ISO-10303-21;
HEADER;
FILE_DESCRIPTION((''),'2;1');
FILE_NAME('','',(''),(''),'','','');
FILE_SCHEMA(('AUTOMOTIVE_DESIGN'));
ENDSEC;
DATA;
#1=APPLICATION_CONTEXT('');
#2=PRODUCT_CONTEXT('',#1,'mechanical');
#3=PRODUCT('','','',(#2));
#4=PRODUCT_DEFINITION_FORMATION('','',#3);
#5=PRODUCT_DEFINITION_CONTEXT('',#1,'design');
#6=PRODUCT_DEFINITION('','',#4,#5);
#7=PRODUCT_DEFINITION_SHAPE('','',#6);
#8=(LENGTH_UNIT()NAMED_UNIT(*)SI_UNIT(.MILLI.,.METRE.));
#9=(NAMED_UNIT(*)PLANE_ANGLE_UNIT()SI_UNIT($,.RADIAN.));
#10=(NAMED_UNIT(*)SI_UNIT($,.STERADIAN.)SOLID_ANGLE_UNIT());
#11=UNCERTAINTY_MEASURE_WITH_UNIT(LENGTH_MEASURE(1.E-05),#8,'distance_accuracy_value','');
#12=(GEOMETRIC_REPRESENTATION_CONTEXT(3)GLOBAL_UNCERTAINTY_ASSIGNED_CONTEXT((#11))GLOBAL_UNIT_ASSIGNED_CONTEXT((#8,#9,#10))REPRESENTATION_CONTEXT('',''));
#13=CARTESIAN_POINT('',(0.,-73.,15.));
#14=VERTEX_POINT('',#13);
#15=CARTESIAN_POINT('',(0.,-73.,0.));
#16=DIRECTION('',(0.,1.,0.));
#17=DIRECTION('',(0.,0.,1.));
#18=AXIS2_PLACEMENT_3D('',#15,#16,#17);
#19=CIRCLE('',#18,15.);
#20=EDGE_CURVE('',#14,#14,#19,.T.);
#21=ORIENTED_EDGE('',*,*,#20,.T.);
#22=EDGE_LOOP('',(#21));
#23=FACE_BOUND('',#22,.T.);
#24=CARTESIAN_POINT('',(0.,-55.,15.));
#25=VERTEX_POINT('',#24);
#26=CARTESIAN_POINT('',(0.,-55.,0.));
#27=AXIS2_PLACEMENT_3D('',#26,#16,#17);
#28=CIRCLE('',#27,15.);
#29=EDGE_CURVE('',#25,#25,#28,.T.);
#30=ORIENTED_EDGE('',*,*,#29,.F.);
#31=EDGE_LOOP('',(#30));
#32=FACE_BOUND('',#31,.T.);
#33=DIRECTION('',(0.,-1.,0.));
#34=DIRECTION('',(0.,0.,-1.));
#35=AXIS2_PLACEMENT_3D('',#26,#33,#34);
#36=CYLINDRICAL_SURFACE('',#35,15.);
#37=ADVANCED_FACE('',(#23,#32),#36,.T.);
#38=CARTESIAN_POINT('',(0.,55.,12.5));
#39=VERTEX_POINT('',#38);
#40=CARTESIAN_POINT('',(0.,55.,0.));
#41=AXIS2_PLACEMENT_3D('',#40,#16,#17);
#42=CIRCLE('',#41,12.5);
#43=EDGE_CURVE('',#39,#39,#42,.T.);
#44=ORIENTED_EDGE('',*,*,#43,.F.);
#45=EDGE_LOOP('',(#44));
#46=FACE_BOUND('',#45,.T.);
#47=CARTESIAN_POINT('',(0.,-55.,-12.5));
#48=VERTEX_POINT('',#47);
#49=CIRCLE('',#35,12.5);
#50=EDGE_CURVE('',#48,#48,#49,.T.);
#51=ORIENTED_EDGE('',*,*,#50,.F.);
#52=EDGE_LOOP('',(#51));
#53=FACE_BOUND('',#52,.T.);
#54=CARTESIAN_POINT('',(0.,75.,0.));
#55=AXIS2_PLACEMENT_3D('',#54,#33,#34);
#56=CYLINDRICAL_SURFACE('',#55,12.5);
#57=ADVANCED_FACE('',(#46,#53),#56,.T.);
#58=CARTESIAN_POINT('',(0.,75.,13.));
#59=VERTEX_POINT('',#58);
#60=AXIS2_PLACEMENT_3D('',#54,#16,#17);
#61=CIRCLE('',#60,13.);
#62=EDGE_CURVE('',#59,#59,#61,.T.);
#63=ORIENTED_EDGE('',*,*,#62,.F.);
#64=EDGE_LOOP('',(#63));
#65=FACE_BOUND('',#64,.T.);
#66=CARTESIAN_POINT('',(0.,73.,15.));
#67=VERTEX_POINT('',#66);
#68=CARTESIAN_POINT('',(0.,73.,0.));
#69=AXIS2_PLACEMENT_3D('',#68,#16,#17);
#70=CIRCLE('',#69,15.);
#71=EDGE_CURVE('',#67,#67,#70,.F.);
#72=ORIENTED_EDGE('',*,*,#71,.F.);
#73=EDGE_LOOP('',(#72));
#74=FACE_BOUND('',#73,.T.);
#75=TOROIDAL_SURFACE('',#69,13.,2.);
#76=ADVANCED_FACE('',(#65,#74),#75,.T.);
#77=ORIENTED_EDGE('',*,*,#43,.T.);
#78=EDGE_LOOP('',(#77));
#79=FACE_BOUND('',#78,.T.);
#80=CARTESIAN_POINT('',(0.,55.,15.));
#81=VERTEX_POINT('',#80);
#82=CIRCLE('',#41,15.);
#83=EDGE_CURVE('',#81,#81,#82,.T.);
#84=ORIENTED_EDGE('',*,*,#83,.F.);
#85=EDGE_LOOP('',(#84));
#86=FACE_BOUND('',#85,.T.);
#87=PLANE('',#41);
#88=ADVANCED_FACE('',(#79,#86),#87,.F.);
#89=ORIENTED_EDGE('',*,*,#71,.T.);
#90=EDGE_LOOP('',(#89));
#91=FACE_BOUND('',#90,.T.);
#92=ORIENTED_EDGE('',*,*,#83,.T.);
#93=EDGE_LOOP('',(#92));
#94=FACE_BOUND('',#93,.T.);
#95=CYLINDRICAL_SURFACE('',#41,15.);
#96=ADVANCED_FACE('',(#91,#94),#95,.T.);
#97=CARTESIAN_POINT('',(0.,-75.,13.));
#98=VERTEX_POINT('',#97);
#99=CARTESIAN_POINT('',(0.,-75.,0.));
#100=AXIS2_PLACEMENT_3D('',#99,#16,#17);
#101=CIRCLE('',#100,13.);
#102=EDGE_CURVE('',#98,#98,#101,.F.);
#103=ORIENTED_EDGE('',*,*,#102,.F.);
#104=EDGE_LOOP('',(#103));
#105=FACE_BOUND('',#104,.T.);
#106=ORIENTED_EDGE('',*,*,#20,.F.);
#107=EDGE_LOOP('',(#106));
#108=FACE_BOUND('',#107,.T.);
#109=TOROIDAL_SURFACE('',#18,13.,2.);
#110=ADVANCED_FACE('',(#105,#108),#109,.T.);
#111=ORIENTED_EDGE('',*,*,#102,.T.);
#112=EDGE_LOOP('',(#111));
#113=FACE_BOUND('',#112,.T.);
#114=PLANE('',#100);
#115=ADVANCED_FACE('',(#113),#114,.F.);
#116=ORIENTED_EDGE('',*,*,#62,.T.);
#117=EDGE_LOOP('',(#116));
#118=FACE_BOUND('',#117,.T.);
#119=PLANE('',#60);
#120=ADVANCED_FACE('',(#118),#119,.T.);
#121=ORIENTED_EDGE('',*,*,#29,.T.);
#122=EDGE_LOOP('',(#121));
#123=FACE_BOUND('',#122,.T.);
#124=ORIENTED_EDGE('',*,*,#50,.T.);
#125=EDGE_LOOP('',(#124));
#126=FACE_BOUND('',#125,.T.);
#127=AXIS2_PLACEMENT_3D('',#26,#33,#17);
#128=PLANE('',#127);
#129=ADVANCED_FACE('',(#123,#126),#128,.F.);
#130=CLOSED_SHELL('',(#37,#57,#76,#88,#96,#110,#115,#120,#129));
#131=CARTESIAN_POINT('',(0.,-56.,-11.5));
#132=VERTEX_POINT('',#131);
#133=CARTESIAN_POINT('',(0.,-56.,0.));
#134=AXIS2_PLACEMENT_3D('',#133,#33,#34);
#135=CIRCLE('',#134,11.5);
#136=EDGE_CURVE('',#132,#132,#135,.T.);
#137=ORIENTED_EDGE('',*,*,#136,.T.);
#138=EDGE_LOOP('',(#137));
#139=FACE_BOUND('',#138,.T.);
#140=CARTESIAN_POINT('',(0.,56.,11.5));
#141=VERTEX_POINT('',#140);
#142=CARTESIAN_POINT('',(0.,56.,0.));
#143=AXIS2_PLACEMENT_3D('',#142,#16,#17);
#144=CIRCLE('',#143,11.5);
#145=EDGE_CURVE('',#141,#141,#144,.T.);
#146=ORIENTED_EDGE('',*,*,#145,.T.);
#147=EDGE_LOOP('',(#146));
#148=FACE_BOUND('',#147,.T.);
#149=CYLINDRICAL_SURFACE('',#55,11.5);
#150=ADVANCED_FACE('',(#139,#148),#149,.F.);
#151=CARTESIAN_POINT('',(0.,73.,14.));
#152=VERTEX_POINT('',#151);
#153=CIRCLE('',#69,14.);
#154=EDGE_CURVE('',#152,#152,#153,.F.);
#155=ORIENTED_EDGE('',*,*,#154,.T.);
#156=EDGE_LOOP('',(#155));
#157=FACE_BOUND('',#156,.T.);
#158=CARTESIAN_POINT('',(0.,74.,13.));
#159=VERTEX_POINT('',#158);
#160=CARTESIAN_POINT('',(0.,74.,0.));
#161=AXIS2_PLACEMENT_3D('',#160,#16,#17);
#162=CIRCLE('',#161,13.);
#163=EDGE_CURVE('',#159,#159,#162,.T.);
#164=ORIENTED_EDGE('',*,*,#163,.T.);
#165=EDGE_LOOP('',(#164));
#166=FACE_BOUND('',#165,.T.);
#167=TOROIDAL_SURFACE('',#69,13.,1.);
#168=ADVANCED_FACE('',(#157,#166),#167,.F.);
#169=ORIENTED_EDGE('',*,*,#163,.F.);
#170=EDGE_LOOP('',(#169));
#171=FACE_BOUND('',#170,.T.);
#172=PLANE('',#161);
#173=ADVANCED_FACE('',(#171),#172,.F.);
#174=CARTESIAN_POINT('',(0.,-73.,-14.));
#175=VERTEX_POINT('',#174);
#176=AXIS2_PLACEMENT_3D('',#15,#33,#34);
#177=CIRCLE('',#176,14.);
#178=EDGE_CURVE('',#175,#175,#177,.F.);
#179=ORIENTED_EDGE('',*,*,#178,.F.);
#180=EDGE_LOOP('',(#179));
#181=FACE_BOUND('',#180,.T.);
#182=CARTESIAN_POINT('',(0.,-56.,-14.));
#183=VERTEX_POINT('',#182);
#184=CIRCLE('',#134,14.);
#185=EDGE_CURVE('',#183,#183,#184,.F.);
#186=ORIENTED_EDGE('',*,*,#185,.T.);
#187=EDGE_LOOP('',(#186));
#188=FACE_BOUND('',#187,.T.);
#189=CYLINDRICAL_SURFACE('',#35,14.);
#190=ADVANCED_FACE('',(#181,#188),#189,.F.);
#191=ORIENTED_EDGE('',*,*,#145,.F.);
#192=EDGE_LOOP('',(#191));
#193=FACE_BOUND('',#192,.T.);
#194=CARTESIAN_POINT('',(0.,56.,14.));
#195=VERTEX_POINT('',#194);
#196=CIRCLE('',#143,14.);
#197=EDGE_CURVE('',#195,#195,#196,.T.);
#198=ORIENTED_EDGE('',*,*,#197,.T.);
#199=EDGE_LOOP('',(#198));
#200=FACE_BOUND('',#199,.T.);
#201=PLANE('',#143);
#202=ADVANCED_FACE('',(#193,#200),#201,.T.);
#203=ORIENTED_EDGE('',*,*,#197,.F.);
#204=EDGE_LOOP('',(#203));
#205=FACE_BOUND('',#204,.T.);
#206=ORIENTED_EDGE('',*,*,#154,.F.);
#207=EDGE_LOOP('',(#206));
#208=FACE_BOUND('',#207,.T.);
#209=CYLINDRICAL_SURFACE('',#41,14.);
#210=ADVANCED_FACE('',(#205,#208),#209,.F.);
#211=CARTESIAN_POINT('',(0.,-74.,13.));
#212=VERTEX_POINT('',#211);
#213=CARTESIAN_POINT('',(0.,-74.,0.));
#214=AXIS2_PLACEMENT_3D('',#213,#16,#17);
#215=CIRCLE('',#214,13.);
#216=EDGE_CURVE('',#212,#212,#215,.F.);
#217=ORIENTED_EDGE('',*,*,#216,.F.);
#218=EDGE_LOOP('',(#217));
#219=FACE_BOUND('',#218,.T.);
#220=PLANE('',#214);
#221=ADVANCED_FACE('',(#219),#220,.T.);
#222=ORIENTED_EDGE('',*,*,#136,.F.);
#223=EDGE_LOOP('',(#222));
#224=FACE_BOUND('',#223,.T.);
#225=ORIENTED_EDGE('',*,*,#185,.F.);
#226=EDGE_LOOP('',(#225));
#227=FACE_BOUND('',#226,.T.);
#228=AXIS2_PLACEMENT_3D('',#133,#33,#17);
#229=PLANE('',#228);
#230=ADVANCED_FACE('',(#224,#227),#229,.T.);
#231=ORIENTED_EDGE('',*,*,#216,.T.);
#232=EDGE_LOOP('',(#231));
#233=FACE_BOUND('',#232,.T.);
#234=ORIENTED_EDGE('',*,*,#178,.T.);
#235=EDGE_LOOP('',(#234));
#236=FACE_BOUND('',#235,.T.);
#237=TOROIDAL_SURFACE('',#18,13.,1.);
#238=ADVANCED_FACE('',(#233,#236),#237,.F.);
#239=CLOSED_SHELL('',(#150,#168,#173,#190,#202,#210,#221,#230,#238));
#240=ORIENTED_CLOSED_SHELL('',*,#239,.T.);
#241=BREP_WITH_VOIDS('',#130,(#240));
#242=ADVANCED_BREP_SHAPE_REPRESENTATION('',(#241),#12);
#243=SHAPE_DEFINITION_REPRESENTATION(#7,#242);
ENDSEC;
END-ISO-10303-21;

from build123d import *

# Parameters (mm, degrees)
SKETCH1_R           = 12.5
BOSS_EXTRUDE1_DEPTH = 75
SKETCH2_R           = 15
BOSS_EXTRUDE2_DEPTH = 20
FILLET1_R           = 2


# Read off the part's stored shape, not the designer's step: Shell2
with BuildPart() as part:
    # Sketch1 → Boss-Extrude1 (new, symmetric)
    with BuildSketch(Plane(origin=(0, 0, 0), x_dir=(1, 0, 0), z_dir=(0, 1, 0))):
        with Locations(Location((0, 0, 0), (0, 0, 270))):
            Circle(SKETCH1_R)
    extrude(amount=BOSS_EXTRUDE1_DEPTH, both=True)

    # Sketch2 → Boss-Extrude2 (add)
    with BuildSketch(Plane(origin=(0, 75, 0), x_dir=(1, 0, 0), z_dir=(0, 1, 0))):
        with Locations(Location((0, 0, 0), (0, 0, 270))):
            Circle(SKETCH2_R)
    boss_extrude2 = extrude(amount=-BOSS_EXTRUDE2_DEPTH)

    # Mirror1: Boss-Extrude2 across plane
    add(boss_extrude2.mirror(Plane.ZX))

    # Fillet1
    fillet1_edges = [part.edges().sort_by_distance(p)[0] for p in [
        (0, -75, -15),
        (0, 75, -15),
    ]]
    fillet(fillet1_edges, radius=FILLET1_R)

    # Shell2 outline → Shell2 (revolve, cut)
    with BuildSketch(Plane.XY):
        with BuildLine():
            Line((13, 74), (0, 74))
            Line((0, 74), (0, -74))
            Line((0, -74), (13, -74))
            ThreePointArc((13, -74), (13.707106781, -73.707106781), (14, -73))
            Line((14, -73), (14, -56))
            Line((14, -56), (11.5, -56))
            Line((11.5, -56), (11.5, 56))
            Line((11.5, 56), (14, 56))
            Line((14, 56), (14, 73))
            ThreePointArc((14, 73), (13.707106781, 73.707106781), (13, 74))
        make_face()
    revolve(axis=Axis((0, 0, 0), (0, 1, 0)), mode=Mode.SUBTRACT)


solid = part.part
